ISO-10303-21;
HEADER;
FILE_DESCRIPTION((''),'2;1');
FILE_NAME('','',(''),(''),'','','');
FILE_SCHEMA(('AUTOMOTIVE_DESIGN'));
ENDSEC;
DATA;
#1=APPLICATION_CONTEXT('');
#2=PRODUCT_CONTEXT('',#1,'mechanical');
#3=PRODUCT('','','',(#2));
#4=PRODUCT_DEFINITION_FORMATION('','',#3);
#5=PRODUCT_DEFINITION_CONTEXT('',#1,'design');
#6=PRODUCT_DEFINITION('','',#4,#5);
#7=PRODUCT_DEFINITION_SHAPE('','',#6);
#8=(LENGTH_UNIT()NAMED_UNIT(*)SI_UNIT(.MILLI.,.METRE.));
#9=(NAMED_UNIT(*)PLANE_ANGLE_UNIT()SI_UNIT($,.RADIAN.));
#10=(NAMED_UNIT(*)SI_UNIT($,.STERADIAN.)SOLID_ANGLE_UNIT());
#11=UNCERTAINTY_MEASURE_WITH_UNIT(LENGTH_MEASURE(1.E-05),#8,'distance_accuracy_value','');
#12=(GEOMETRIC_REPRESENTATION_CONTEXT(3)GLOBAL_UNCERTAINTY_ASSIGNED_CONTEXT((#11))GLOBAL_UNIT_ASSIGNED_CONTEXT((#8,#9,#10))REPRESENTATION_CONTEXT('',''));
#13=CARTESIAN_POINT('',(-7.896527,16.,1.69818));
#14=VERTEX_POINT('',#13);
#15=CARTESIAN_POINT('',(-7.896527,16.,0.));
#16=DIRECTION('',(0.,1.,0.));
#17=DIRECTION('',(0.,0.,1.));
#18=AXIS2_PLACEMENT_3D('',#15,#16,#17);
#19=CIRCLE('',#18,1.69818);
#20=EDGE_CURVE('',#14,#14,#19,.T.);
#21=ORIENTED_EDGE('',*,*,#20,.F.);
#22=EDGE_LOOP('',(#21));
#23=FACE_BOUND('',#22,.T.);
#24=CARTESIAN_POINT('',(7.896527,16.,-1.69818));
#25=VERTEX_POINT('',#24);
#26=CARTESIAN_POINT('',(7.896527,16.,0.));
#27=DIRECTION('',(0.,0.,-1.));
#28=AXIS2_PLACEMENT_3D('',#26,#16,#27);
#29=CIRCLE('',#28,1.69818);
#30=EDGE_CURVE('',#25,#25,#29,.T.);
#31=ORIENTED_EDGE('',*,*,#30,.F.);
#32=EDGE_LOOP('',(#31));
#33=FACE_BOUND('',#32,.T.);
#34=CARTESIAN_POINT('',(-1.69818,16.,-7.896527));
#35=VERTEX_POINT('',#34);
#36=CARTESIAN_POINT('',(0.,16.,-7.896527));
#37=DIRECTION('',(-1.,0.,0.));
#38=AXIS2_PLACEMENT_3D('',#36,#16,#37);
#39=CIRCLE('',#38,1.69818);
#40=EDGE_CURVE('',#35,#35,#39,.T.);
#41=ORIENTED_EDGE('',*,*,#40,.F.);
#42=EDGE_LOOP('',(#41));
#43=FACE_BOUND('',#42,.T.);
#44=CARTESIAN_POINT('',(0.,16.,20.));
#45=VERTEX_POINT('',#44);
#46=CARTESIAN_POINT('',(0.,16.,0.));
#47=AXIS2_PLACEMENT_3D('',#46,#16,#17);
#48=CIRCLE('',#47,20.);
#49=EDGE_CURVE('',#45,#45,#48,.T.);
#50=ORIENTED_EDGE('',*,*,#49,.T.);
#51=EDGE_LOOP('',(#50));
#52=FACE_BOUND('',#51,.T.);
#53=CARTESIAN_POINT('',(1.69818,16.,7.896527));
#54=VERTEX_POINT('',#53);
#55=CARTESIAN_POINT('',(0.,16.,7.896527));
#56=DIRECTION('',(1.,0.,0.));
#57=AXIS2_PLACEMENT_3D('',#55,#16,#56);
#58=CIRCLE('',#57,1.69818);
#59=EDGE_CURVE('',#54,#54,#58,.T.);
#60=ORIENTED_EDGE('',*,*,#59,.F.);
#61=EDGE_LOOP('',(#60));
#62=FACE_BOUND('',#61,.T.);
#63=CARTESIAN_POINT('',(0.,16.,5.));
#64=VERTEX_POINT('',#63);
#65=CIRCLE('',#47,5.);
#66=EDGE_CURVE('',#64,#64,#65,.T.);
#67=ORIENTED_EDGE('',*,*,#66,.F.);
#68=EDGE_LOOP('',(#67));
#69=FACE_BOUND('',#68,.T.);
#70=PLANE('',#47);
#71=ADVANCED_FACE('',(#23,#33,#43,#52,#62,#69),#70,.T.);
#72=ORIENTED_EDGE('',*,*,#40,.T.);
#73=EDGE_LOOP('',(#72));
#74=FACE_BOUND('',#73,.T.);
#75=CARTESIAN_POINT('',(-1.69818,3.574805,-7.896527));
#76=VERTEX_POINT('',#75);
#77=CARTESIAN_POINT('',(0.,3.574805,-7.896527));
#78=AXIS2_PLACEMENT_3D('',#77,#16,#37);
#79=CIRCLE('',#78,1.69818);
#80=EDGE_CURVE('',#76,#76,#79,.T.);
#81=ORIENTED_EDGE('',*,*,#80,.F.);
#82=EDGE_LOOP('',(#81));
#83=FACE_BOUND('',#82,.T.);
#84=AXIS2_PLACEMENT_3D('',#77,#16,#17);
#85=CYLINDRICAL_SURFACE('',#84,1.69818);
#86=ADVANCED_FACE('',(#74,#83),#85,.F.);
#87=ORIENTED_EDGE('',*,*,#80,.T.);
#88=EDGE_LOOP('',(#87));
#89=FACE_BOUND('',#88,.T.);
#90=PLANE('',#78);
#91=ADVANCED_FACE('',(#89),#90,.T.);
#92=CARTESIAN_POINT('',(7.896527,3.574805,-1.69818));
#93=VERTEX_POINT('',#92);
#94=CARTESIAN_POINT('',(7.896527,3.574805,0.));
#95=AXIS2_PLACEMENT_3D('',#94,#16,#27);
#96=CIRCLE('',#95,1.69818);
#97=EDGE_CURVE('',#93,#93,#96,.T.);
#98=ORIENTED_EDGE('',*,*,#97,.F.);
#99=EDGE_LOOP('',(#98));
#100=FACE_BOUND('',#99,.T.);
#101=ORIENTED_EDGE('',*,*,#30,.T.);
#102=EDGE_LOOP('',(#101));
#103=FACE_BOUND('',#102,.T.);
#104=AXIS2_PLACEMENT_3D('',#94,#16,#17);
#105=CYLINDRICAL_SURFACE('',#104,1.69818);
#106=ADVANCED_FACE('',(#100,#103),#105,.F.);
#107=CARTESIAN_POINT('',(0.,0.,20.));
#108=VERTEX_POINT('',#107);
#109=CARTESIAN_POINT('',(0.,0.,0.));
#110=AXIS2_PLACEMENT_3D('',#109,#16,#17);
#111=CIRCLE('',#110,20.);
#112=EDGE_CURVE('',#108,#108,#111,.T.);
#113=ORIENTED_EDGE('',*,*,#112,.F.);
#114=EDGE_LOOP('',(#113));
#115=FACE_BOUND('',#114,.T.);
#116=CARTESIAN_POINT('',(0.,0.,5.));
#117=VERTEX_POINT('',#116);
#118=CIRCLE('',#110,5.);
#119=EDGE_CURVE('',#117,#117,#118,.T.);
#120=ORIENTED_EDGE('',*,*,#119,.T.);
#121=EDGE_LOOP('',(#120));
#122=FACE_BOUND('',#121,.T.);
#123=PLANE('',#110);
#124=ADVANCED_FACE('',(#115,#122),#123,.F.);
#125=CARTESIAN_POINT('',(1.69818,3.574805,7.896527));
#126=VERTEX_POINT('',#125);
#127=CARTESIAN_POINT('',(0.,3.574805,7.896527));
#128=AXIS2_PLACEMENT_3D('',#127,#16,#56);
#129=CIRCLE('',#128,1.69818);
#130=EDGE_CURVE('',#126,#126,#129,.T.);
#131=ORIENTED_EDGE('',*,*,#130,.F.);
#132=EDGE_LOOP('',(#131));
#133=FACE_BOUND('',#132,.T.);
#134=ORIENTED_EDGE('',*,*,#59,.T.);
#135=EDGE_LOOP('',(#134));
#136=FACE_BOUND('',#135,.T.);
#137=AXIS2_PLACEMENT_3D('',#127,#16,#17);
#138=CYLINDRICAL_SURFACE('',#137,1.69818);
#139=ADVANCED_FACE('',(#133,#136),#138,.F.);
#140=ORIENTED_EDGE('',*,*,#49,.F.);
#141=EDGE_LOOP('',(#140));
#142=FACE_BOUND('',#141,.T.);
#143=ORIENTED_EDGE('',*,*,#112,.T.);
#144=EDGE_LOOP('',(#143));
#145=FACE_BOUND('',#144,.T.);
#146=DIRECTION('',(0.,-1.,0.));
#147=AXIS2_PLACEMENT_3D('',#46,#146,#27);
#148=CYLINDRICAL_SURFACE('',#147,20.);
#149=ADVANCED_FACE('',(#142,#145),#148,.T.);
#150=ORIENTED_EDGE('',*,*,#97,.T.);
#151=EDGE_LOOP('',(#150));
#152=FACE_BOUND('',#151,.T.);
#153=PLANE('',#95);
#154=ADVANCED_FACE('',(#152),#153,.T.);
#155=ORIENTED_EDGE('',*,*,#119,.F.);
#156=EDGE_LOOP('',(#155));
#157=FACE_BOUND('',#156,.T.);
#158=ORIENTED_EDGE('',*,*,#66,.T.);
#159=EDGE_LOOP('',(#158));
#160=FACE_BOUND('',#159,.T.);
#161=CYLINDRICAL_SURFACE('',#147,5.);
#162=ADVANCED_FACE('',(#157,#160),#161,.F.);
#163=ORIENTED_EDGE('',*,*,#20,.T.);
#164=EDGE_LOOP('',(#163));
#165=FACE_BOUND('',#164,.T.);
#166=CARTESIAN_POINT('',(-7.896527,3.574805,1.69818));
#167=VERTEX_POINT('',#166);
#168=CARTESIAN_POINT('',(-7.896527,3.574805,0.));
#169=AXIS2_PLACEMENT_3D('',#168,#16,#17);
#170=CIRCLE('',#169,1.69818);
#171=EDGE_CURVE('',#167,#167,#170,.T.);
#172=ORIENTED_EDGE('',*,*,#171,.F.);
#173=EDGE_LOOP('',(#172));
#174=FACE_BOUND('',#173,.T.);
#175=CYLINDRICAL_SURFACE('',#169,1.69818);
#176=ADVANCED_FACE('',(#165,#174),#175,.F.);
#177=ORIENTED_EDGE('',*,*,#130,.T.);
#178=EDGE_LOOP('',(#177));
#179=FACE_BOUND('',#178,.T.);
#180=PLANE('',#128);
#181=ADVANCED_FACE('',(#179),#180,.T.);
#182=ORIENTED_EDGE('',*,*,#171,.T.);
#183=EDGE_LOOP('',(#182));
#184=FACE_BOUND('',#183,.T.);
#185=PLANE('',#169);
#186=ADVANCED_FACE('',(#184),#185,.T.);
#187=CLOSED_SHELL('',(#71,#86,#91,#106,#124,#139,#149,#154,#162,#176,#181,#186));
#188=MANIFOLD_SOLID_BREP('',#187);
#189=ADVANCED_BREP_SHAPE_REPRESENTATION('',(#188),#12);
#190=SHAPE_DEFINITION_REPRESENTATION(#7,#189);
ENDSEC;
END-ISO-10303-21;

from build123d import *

# Parameters (mm, degrees)
SKETCH1_R           = 20
BOSS_EXTRUDE1_DEPTH = 16
SKETCH2_R           = 5
CUT_EXTRUDE1_DEPTH  = 33.496153619
SKETCH3_R           = 1.698180001
CUT_EXTRUDE2_DEPTH  = 12.425194902
CIRPATTERN1_COUNT   = 4


with BuildPart() as part:
    # Sketch1 → Boss-Extrude1 (new body)
    with BuildSketch(Plane(origin=(0, 0, 0), x_dir=(1, 0, 0), z_dir=(0, 1, 0))):
        Circle(SKETCH1_R)
    extrude(amount=BOSS_EXTRUDE1_DEPTH)

    # Sketch2 → Cut-Extrude1 (cut, through all)
    with BuildSketch(Plane(origin=(0, 0, 0), x_dir=(1, 0, 0), z_dir=(0, 1, 0))):
        Circle(SKETCH2_R)
    extrude(amount=CUT_EXTRUDE1_DEPTH, mode=Mode.SUBTRACT)

    # Sketch3 → Cut-Extrude2 (cut)
    with BuildSketch(Plane(origin=(0, 16, 0), x_dir=(1, 0, 0), z_dir=(0, 1, 0))):
        with Locations((-7.896526705, 0)):
            Circle(SKETCH3_R)
    cut_extrude2 = extrude(amount=-CUT_EXTRUDE2_DEPTH, mode=Mode.SUBTRACT)

    # CirPattern1: Cut-Extrude2 ×4 about axis
    cirpattern1_axis = Axis((0, 0, 0), (0, 1, 0))
    for i in range(1, CIRPATTERN1_COUNT):
        add(cut_extrude2.rotate(cirpattern1_axis, i * 360 / CIRPATTERN1_COUNT), mode=Mode.SUBTRACT)


solid = part.part
